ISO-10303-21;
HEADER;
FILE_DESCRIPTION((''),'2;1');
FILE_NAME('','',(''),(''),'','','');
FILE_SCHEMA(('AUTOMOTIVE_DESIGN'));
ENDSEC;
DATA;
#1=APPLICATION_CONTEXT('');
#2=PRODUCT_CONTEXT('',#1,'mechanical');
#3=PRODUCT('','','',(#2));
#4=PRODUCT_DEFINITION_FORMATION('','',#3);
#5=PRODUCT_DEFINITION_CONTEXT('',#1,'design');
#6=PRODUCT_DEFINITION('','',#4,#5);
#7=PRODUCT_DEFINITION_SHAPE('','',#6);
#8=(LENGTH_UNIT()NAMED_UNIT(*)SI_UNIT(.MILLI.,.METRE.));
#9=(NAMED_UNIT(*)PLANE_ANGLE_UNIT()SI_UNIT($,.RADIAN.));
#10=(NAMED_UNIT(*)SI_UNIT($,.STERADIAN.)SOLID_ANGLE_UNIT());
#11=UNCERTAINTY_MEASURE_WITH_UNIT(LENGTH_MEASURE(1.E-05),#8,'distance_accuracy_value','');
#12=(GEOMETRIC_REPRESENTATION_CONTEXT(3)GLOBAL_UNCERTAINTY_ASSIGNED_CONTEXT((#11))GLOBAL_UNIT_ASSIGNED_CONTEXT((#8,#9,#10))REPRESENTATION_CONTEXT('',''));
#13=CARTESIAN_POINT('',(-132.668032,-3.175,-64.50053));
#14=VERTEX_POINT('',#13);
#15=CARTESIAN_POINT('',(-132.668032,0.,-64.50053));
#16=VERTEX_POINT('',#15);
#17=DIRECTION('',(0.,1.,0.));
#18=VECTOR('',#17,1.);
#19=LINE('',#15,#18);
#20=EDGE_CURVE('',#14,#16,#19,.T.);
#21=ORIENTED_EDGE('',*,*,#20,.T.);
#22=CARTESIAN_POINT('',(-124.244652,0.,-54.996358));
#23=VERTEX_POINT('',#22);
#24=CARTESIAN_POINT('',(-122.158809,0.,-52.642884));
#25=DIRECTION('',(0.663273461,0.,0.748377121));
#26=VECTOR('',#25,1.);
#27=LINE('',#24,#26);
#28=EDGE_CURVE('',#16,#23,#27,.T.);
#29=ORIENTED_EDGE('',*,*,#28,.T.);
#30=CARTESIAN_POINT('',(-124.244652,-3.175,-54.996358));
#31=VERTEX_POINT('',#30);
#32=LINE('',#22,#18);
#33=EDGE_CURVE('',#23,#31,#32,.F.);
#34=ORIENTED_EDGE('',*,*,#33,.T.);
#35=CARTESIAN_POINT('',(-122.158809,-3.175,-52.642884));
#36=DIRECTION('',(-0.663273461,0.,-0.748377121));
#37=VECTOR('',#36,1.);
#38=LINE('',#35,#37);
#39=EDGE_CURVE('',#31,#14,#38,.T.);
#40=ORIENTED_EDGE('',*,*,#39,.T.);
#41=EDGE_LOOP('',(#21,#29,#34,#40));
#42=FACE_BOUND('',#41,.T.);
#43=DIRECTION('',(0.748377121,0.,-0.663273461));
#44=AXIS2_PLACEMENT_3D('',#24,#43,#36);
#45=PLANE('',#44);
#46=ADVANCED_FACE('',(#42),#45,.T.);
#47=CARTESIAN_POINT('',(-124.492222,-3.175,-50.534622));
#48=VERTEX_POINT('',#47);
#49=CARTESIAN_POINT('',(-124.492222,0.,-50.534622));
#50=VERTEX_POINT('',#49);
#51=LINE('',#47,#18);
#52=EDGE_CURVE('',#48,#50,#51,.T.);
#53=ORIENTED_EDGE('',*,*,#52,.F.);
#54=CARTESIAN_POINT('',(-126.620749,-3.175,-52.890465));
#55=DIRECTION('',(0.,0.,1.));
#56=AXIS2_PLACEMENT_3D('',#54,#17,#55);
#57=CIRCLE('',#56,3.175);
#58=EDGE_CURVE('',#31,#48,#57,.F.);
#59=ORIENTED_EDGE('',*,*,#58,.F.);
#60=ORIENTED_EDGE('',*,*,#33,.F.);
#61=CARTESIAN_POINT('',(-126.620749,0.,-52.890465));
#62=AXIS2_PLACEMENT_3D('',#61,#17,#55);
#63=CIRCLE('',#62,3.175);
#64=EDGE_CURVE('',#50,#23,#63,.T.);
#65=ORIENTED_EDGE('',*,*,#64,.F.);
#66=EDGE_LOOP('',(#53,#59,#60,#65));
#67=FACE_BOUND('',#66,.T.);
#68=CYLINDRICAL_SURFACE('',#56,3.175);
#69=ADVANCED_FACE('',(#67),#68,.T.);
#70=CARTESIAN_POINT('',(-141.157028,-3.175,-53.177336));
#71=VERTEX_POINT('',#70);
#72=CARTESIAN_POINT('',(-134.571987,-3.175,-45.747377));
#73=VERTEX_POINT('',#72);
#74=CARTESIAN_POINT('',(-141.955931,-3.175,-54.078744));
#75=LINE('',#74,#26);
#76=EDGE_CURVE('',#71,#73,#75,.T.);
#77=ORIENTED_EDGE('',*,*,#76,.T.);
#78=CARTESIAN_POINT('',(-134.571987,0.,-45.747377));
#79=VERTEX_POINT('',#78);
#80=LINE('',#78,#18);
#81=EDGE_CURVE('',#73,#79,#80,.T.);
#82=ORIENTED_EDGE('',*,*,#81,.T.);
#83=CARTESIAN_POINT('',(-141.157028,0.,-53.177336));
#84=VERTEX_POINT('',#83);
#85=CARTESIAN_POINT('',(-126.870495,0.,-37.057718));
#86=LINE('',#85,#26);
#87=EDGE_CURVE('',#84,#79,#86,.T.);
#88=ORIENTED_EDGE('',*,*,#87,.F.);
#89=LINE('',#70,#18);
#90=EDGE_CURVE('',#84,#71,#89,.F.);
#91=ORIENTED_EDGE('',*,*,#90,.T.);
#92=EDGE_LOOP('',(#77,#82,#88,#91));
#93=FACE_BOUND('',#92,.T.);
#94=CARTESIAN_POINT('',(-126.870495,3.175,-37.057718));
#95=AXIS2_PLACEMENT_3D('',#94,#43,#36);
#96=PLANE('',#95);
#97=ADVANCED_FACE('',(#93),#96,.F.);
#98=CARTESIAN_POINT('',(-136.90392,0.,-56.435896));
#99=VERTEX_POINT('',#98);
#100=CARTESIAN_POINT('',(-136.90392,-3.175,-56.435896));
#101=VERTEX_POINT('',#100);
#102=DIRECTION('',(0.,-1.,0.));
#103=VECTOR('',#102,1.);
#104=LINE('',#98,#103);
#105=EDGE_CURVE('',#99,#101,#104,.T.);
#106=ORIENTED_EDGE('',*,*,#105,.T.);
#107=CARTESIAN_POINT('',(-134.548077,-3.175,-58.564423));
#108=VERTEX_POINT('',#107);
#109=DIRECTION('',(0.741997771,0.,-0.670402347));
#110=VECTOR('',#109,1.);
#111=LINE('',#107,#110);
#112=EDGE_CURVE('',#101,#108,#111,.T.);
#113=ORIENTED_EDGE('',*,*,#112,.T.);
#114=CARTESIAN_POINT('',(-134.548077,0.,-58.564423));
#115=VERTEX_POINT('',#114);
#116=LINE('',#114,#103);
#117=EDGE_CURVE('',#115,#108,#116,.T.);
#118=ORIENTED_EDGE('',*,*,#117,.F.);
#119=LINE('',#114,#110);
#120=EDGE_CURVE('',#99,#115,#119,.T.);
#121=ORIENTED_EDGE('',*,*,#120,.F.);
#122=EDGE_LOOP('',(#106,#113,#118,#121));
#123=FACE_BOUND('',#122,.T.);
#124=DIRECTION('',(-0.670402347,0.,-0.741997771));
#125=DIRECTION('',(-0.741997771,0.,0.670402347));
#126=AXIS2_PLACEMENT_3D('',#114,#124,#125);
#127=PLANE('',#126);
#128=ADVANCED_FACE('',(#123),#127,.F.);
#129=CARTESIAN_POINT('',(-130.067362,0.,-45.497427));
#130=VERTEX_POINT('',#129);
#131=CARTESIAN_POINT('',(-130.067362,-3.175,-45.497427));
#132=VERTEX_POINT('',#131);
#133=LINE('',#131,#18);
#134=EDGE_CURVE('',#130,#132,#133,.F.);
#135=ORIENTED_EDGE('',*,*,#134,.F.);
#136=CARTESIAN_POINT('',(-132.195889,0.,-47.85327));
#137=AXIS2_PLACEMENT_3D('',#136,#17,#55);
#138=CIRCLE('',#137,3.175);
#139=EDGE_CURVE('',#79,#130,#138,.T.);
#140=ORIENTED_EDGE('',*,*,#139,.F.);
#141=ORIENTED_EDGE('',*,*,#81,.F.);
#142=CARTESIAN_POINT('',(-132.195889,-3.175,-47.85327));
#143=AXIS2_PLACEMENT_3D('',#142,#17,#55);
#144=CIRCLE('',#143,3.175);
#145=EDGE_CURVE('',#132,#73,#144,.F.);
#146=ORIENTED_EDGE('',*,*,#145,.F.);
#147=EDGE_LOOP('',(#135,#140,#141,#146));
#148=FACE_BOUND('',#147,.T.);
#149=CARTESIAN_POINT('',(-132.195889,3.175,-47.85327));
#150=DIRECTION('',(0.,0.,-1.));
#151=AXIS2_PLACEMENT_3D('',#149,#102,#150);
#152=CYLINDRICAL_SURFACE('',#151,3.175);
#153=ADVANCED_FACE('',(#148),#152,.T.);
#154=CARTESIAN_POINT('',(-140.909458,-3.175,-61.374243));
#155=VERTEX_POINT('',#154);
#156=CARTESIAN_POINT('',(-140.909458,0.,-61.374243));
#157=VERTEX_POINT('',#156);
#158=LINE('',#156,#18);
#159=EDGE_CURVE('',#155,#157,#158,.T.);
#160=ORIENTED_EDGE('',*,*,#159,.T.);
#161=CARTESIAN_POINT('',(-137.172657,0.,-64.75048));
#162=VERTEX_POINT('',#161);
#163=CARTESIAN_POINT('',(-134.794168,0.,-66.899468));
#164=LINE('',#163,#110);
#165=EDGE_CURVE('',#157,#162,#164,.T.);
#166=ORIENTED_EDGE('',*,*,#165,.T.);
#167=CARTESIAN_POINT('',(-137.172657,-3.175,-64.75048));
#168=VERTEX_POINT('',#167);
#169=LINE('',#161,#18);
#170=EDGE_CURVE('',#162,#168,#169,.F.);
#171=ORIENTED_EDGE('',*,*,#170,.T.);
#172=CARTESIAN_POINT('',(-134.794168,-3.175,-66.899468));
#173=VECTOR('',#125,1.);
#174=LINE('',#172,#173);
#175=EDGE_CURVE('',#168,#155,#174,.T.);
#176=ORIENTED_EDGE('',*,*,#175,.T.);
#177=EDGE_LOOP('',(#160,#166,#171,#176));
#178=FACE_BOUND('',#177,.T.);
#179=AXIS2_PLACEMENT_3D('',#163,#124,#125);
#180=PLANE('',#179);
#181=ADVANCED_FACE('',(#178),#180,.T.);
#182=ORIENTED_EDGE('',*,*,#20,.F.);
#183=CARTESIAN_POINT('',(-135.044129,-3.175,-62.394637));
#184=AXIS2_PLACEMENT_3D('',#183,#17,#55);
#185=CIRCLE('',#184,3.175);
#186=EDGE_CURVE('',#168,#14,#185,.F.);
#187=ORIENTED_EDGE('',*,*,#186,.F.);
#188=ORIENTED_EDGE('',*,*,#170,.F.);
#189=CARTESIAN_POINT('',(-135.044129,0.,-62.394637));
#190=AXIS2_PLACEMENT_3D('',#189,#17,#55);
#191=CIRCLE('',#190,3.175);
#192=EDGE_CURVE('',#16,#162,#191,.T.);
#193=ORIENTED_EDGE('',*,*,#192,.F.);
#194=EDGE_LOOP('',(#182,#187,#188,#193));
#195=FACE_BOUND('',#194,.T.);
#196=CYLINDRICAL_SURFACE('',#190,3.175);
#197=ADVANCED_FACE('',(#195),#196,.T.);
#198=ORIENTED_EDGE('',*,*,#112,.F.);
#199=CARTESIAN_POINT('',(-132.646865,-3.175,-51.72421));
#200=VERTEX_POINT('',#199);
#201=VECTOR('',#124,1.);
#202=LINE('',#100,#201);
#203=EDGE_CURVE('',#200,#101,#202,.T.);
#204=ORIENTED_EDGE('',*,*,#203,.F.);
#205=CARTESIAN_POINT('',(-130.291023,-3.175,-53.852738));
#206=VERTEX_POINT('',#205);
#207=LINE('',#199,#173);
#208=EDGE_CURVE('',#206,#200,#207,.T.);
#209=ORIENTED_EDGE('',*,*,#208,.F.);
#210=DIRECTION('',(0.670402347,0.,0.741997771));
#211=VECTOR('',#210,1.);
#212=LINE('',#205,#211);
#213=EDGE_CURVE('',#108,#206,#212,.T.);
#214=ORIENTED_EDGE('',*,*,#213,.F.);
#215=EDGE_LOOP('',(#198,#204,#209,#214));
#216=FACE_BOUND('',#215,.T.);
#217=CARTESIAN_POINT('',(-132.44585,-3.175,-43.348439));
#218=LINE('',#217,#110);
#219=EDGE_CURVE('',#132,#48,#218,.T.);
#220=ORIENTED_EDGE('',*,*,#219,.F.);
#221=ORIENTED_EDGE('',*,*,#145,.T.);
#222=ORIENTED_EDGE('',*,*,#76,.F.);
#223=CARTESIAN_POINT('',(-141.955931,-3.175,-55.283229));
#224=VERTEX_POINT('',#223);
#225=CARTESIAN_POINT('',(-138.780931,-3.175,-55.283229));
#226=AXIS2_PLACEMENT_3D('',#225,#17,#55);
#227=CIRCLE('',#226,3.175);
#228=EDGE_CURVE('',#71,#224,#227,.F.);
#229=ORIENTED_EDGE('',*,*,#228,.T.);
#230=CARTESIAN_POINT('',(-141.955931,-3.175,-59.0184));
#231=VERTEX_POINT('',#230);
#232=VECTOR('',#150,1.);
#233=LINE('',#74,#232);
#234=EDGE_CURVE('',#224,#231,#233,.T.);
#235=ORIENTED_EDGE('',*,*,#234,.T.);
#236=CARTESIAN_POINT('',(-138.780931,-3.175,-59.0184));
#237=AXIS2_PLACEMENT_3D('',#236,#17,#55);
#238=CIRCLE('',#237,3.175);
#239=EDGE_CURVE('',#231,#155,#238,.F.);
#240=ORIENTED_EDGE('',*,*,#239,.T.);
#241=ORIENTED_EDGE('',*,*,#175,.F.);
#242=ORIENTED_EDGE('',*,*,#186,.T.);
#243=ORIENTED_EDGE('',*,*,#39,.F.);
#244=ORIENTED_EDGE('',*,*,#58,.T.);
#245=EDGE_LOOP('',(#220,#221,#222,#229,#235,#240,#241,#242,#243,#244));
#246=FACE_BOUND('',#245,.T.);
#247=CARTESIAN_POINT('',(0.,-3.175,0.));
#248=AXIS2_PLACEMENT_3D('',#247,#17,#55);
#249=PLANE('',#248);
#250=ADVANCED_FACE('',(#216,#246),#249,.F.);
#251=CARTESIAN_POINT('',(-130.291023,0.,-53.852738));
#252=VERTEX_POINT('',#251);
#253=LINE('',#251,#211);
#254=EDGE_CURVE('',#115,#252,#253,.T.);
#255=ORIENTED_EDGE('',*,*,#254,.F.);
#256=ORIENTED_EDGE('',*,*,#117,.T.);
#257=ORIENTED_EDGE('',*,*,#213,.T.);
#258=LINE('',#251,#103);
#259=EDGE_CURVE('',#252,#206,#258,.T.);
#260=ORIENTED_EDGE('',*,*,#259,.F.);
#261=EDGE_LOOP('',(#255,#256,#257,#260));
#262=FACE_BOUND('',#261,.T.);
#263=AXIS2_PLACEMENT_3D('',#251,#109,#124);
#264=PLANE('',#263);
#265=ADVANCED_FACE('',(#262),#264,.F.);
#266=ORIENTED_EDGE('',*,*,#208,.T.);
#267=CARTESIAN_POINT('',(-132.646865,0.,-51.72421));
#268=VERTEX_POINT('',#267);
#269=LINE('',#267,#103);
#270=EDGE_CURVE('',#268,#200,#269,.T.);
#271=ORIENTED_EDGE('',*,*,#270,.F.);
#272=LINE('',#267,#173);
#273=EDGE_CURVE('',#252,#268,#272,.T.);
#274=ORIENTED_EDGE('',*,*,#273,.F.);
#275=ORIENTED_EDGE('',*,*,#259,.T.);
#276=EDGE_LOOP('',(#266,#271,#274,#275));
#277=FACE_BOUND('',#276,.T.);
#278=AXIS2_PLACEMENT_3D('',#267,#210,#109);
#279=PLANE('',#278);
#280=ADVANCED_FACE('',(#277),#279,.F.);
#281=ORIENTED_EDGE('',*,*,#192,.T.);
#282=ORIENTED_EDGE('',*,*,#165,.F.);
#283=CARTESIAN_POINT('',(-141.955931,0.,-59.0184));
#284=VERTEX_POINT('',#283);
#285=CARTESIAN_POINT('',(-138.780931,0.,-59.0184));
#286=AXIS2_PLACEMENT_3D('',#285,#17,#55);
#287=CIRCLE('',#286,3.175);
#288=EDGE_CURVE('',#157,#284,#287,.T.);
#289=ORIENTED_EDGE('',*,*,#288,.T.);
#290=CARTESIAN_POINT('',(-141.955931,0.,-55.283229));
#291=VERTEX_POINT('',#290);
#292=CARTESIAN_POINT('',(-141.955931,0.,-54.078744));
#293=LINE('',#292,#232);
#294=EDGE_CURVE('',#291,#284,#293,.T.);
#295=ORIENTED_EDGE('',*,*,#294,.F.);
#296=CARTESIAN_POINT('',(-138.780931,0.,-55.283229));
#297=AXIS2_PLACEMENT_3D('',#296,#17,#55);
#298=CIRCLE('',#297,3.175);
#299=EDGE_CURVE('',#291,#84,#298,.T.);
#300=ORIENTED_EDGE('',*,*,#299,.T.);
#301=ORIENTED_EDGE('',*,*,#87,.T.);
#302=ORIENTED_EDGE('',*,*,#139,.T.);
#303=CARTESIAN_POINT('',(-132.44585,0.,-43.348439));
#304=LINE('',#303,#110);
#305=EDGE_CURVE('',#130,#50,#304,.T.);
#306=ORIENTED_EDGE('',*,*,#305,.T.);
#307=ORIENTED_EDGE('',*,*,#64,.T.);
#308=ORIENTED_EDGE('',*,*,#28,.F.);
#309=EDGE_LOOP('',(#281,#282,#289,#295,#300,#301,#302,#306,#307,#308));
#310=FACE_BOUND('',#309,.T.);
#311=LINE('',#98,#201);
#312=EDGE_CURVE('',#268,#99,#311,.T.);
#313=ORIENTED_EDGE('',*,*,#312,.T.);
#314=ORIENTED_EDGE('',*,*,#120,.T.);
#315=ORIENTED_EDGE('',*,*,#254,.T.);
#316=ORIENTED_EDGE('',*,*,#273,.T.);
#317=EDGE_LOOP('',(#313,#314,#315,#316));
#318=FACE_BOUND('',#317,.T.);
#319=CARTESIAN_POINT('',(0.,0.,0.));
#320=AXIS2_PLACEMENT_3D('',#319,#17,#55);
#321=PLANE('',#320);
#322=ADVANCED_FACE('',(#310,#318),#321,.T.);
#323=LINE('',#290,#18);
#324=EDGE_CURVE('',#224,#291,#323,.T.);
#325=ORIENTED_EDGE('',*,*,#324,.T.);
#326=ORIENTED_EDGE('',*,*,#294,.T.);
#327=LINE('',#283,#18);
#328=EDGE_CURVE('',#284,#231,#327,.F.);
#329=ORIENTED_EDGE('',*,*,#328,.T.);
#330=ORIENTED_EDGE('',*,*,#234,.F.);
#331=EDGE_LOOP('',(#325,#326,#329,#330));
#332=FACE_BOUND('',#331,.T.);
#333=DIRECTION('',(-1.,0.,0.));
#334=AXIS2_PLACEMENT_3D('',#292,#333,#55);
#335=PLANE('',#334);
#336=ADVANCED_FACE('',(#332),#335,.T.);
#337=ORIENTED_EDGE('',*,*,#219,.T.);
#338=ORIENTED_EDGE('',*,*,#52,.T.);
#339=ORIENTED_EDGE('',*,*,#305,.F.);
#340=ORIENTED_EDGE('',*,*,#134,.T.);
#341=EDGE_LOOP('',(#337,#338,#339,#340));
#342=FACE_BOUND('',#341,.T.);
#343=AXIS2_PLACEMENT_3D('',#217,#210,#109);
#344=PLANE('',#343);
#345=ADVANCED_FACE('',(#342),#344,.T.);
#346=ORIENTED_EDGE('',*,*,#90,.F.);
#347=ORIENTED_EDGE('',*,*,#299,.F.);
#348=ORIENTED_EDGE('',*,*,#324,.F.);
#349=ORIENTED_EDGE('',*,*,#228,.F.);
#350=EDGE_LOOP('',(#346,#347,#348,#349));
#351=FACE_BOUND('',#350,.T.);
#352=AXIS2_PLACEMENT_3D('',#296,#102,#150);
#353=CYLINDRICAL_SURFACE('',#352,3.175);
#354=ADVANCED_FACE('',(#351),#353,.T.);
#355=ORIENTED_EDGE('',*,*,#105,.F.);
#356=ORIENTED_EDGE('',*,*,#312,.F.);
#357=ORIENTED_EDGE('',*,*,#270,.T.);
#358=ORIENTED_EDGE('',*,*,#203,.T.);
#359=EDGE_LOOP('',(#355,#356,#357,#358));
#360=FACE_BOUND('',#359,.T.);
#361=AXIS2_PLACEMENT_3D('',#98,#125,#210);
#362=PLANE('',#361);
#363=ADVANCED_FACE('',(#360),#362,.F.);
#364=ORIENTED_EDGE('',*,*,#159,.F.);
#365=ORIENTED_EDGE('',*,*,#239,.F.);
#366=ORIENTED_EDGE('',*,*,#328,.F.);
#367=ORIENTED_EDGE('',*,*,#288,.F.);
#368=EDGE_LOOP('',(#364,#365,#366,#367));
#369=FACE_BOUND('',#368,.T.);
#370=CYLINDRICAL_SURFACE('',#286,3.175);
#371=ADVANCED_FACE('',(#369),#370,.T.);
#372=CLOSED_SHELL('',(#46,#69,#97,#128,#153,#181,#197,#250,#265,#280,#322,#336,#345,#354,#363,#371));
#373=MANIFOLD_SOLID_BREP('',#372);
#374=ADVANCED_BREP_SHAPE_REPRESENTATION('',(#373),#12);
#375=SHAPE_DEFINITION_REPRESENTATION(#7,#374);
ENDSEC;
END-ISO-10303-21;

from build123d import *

# Parameters (mm, degrees)
STOCK_RECORD_START          = -3.175
STOCK_RECORD_NEEDLE_1_DEPTH = 3.175
FILLET1_R                   = 3.175
NEEDLE_HOLE_DEPTH           = 157.399949281


# Read off the part's stored shape, not the designer's step: Stock-Record Needle-1
with BuildPart() as part:
    # Stock-Record Needle-1 outline → Stock-Record Needle-1 (new body)
    with BuildSketch(Plane(origin=(0, 0, 0), x_dir=(1, 0, 0), z_dir=(0, 1, 0)).offset(STOCK_RECORD_START)):
        Polygon((-134.794168142, 66.899467737), (-141.955930631, 60.428744281), (-141.955930631, 54.078744281), (-132.445850386, 43.348439368), (-122.158808708, 52.642883574), align=None)
    extrude(amount=STOCK_RECORD_NEEDLE_1_DEPTH)

    # Fillet1
    fillet1_edges = [part.edges().sort_by_distance(p)[0] for p in [
        (-132.445850386, -1.5875, -43.348439368),
        (-122.158808708, -1.5875, -52.642883574),
        (-134.794168142, -1.5875, -66.899467737),
        (-141.955930631, -1.5875, -60.428744281),
        (-141.955930631, -1.5875, -54.078744281),
    ]]
    fillet(fillet1_edges, radius=FILLET1_R)

    # Needle Hole Sketch → Needle Hole (cut, through all)
    with BuildSketch(Plane.XZ.offset(3.175)):
        Polygon((-136.903920332, -56.435895918), (-132.646865427, -51.72421007), (-130.291022503, -53.852737522), (-134.548077408, -58.564423371), align=None)
    extrude(amount=-NEEDLE_HOLE_DEPTH, mode=Mode.SUBTRACT)


solid = part.part
